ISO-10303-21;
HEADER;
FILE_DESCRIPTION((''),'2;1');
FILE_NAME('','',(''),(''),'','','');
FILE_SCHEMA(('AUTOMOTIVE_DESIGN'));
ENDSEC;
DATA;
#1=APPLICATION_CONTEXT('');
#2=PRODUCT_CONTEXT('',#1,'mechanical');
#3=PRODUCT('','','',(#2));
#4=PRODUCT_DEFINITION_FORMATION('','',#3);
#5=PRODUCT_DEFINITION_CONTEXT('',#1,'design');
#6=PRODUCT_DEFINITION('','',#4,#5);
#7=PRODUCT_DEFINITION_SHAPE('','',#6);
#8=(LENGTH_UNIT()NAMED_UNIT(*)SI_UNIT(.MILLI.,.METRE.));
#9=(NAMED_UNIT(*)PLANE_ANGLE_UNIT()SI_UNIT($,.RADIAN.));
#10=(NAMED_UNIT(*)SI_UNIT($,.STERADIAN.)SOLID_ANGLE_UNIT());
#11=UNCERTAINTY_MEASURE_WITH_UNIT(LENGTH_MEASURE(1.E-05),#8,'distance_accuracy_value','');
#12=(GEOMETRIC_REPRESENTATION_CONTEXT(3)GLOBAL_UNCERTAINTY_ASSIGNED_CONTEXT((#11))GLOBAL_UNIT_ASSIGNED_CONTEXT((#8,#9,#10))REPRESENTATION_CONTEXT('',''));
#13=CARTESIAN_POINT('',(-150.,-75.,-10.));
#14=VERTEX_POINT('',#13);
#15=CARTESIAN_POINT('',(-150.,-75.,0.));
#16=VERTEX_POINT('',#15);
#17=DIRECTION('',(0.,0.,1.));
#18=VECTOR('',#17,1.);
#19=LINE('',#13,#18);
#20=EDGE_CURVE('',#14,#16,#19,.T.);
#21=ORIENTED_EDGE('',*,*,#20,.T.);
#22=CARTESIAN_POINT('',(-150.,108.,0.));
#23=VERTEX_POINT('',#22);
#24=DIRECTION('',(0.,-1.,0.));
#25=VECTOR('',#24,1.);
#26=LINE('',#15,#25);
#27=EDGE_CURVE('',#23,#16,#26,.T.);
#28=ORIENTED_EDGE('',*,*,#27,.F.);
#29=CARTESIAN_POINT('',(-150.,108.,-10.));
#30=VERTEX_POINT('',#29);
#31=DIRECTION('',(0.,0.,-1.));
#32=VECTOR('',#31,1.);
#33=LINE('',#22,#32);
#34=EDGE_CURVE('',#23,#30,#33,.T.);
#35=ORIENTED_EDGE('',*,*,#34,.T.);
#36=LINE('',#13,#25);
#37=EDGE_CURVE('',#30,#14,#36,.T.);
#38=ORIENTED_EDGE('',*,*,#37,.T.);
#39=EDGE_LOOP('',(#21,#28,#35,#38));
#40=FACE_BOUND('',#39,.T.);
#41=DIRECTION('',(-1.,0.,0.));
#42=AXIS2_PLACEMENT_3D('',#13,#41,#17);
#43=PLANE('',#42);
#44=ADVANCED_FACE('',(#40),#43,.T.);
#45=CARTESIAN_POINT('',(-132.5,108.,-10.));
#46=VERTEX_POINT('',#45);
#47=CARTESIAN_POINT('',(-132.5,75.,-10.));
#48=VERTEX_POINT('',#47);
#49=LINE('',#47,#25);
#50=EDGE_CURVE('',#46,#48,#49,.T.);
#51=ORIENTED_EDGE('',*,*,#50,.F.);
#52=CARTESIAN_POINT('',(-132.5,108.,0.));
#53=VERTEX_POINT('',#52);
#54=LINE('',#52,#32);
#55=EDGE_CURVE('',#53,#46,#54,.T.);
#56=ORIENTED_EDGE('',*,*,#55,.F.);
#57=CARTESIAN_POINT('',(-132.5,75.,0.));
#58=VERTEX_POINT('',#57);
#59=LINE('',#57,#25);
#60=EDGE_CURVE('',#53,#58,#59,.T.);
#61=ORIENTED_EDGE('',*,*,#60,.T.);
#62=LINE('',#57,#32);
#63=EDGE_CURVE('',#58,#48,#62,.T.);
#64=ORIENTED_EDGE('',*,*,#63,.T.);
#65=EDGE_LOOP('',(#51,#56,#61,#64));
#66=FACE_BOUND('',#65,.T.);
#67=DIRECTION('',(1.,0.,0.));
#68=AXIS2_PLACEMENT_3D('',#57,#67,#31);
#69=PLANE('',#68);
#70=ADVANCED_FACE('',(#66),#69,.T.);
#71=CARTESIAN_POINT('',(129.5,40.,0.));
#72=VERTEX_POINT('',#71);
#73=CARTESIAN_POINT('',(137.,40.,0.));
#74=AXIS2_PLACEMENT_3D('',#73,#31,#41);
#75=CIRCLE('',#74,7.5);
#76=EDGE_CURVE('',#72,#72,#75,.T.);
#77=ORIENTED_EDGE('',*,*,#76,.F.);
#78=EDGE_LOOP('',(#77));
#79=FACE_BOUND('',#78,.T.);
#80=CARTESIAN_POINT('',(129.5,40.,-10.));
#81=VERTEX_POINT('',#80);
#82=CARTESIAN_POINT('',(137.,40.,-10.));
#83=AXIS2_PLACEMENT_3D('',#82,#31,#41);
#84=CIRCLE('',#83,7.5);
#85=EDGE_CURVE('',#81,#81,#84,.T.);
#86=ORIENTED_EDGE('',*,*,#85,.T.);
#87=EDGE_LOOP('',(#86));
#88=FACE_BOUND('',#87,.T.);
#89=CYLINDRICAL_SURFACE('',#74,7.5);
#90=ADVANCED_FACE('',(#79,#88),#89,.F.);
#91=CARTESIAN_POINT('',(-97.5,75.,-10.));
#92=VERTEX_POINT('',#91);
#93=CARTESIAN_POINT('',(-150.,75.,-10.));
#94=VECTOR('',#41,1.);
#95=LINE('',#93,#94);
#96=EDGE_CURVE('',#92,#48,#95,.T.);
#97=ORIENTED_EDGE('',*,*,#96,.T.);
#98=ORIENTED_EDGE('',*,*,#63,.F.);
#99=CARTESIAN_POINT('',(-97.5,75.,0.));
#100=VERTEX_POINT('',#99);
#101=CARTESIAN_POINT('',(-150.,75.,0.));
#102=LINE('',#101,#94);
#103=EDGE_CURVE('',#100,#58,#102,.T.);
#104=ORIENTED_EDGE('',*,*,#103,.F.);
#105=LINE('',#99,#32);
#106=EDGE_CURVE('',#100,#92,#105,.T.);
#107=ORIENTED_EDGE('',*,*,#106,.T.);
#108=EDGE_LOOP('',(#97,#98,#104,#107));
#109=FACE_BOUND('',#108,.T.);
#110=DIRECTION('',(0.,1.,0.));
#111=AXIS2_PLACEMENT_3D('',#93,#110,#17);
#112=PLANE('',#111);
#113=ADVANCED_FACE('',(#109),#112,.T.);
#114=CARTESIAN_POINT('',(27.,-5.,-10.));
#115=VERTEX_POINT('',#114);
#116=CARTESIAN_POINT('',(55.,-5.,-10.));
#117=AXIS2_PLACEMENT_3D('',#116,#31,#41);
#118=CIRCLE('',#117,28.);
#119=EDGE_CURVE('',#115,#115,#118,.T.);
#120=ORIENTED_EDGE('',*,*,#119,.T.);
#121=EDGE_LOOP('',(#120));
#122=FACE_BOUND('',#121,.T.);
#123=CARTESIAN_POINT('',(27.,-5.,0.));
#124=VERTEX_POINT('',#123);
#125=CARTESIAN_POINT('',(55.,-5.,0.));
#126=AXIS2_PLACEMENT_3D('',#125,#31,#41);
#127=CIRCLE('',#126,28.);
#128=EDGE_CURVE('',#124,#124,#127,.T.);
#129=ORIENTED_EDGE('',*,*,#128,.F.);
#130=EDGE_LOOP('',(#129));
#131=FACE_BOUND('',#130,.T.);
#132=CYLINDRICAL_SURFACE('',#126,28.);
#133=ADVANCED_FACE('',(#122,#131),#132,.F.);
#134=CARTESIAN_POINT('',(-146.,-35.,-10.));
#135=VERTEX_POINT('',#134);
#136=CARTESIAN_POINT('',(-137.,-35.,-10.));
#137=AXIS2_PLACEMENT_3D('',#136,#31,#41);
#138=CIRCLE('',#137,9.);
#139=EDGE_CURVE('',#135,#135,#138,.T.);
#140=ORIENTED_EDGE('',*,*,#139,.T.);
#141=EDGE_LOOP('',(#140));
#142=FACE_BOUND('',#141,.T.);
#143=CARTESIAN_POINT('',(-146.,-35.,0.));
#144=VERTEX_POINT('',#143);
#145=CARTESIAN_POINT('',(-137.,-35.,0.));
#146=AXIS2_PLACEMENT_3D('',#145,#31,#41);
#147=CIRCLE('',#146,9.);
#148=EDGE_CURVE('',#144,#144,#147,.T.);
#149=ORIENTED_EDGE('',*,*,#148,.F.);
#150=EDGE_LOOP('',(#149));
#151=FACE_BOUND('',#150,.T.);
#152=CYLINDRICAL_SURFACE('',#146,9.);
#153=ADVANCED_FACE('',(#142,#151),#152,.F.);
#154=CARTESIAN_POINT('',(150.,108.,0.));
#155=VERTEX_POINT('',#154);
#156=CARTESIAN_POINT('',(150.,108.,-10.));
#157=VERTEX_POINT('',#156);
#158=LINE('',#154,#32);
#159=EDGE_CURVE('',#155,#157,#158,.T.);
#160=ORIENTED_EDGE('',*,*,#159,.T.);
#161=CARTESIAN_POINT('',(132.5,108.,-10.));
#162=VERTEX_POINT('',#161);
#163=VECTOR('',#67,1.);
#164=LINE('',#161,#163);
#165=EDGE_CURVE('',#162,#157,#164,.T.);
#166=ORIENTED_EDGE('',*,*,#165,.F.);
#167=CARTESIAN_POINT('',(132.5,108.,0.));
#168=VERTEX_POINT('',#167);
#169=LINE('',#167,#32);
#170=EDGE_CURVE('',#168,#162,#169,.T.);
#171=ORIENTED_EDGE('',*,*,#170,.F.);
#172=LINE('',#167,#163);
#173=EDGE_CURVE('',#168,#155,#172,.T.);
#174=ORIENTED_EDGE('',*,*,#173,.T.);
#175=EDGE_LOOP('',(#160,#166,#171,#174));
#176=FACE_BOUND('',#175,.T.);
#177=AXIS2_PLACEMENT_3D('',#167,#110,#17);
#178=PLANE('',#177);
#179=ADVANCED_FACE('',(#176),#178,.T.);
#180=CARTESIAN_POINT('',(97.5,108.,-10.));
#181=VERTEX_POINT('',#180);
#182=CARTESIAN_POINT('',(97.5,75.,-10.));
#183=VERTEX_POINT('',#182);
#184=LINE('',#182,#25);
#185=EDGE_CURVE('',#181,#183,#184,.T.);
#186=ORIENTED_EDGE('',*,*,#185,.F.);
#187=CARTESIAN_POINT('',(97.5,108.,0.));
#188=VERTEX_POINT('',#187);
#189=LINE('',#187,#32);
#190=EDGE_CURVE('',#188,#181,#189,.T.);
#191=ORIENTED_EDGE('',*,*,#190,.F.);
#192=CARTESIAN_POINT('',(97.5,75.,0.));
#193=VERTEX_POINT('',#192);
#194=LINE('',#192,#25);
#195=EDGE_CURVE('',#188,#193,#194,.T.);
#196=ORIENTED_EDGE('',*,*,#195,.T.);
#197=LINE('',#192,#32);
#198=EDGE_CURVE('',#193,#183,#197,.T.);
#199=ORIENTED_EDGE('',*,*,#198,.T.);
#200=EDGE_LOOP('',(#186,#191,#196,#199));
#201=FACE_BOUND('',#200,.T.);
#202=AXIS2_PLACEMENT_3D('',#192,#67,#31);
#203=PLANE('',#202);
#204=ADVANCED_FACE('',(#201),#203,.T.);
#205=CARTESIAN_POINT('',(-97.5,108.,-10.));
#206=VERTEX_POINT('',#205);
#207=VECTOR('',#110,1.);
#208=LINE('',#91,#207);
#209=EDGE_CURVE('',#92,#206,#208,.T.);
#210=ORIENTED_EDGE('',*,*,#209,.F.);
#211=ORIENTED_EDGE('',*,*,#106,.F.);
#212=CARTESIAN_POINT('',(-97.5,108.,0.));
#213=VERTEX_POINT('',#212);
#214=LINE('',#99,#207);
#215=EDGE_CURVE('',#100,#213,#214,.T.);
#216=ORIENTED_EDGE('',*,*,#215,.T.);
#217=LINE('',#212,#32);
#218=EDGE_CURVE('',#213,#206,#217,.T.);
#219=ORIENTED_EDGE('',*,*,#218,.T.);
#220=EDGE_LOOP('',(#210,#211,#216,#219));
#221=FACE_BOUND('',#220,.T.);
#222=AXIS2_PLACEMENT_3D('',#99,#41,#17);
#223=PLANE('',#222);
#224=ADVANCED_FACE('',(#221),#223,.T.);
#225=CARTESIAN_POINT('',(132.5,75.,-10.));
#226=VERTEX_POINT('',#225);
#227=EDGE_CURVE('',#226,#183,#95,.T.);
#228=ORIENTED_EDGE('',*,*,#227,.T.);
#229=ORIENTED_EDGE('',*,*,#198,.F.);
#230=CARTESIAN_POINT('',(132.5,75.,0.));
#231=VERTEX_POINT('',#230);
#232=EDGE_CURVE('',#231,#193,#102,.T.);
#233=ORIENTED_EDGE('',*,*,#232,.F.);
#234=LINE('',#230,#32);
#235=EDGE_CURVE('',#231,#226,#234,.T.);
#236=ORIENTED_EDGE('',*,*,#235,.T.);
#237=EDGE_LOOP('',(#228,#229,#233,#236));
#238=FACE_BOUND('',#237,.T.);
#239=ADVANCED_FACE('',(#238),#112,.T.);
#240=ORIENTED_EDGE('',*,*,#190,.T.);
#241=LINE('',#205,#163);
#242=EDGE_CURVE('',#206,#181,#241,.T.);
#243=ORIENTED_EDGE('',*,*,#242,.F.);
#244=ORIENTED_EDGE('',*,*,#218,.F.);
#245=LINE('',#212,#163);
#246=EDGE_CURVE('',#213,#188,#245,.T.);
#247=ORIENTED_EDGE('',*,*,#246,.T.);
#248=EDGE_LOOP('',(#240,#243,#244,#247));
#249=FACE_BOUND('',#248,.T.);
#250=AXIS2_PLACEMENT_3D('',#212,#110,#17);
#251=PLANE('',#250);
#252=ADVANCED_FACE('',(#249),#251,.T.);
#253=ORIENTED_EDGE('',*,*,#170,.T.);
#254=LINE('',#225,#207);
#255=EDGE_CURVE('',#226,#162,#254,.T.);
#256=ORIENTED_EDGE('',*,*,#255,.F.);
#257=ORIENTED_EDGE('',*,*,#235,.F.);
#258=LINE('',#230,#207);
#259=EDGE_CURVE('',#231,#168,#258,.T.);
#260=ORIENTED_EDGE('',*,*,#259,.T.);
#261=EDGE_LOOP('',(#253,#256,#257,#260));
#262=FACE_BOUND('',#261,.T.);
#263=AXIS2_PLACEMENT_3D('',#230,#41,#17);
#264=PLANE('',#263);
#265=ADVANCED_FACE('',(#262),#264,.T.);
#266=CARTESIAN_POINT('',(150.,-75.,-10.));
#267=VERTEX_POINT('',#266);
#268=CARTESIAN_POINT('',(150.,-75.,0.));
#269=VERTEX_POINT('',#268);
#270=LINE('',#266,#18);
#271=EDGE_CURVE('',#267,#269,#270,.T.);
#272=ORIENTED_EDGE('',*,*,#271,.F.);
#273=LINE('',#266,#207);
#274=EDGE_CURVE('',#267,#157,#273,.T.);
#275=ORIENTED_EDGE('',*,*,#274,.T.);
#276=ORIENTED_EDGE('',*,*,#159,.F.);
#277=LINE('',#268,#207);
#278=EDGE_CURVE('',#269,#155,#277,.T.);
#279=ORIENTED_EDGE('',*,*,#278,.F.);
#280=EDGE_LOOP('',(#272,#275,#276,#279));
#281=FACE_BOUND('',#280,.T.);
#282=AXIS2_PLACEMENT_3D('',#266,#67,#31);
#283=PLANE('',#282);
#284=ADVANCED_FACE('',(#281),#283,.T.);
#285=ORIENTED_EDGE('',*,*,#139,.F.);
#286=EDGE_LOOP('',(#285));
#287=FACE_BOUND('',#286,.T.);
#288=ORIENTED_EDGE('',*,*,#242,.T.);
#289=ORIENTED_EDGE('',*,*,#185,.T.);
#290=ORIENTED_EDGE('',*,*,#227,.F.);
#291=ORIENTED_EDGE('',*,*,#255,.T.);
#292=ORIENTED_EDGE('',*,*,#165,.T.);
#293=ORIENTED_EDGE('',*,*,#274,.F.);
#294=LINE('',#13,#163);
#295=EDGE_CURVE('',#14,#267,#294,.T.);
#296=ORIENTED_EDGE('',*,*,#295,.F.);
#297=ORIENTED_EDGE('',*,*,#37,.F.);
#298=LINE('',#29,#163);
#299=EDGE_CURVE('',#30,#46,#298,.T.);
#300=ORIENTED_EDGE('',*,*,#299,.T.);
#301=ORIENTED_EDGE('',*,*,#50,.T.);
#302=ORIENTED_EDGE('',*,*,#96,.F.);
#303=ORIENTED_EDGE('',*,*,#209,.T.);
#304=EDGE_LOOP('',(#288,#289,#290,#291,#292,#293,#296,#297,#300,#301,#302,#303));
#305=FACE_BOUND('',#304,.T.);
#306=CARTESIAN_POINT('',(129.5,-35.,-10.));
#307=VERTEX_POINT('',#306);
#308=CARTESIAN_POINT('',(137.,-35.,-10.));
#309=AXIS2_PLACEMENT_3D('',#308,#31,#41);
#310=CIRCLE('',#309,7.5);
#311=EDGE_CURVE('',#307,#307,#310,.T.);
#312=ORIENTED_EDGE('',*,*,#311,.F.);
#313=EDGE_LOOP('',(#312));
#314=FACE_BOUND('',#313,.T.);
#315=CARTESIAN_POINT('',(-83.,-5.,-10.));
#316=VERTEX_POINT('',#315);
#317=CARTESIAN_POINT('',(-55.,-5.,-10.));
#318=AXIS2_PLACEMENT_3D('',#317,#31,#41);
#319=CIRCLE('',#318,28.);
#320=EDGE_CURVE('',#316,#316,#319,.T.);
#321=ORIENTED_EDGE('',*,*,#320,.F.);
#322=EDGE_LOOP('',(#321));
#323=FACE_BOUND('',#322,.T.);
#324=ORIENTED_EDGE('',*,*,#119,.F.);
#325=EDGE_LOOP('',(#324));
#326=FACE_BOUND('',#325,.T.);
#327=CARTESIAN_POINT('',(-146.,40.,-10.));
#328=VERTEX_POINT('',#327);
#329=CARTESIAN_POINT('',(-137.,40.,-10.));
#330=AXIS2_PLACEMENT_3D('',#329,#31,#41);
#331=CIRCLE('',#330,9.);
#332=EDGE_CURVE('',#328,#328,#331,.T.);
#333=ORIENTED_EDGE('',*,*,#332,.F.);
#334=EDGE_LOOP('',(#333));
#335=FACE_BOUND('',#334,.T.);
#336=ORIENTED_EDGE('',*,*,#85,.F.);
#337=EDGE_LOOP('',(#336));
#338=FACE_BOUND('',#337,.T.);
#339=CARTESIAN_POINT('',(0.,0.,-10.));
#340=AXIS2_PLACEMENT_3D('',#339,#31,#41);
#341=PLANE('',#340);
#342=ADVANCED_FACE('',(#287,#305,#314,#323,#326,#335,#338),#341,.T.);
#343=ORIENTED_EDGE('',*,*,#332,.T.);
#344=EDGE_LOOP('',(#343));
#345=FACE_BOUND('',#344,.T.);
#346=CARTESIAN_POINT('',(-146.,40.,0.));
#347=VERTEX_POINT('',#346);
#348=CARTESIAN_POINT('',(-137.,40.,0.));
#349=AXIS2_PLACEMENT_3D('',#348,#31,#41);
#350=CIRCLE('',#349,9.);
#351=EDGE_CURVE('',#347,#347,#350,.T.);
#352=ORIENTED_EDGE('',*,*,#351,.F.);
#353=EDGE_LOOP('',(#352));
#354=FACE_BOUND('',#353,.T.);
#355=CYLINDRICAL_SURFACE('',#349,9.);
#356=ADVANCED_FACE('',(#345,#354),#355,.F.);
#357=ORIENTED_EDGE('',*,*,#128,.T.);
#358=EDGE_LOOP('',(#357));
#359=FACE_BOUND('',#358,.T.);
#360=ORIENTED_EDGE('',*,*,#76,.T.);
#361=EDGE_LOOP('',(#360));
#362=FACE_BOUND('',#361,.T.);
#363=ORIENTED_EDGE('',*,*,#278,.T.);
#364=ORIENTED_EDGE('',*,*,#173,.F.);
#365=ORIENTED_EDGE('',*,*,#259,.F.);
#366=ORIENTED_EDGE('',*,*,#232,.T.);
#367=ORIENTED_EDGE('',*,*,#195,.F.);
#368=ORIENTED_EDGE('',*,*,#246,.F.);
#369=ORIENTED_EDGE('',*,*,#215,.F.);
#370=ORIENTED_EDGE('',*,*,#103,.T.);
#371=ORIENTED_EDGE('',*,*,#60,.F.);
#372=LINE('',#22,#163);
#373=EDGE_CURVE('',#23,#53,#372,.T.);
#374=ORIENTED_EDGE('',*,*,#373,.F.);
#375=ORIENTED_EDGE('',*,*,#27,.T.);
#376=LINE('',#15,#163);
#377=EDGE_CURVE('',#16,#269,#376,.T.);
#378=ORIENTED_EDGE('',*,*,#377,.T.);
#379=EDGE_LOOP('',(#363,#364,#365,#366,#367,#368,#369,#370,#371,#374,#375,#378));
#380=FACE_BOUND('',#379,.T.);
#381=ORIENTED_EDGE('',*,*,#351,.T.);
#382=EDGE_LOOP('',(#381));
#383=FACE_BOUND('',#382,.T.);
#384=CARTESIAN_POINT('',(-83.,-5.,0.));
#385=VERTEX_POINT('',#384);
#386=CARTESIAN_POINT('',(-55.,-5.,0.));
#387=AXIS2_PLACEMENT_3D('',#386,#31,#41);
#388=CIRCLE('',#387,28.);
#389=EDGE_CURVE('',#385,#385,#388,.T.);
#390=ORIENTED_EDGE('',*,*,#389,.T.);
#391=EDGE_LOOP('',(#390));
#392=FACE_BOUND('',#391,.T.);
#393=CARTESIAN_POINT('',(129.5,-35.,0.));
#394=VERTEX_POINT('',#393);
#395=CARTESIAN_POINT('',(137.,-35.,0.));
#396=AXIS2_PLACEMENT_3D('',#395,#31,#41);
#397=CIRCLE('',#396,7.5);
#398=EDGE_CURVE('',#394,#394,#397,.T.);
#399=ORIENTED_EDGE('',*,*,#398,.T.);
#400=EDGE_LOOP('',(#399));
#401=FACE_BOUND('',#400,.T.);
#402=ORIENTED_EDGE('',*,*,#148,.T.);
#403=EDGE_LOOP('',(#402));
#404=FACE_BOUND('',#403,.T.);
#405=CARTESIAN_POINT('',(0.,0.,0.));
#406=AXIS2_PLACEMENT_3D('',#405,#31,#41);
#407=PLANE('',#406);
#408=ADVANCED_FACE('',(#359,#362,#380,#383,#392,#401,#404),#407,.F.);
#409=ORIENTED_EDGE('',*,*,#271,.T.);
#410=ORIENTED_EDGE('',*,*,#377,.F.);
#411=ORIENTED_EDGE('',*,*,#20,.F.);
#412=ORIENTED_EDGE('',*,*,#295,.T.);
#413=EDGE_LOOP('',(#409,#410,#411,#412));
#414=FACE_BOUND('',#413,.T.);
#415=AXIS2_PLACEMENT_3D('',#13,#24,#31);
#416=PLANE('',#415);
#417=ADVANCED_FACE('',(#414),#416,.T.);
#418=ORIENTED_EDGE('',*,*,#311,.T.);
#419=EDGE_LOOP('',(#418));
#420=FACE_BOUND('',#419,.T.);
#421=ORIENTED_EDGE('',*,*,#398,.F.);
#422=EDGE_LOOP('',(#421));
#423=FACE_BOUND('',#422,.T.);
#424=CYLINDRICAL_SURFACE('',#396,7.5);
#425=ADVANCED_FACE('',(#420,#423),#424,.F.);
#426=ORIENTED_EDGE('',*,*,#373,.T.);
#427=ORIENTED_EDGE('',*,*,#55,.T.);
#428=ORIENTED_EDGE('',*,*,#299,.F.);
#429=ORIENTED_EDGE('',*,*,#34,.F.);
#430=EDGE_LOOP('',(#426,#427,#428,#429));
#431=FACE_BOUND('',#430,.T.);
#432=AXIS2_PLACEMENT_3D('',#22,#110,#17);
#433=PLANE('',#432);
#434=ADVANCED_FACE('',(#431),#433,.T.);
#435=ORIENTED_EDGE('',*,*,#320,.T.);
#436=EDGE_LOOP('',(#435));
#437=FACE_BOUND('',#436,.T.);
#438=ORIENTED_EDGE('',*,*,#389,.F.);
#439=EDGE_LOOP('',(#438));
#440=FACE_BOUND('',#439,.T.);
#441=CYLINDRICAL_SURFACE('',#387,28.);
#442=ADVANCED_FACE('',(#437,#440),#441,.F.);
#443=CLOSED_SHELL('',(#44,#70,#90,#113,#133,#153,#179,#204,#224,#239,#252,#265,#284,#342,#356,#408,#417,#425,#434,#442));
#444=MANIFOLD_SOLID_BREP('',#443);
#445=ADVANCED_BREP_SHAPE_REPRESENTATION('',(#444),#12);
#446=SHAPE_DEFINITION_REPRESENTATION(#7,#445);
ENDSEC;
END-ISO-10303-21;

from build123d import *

# Parameters (mm, degrees)
IZIM1_W               = 300
IZIM1_H               = 150
TABAN_FLAN_1_DEPTH    = 10
IZIM2_R               = 28
KES_EKSTR_ZYON1_DEPTH = 10
IZIM3_R               = 7.5
KES_EKSTR_ZYON2_DEPTH = 10
IZIM4_R               = 7.5
KES_EKSTR_ZYON3_DEPTH = 10
IZIM5_R               = 9
KES_EKSTR_ZYON4_DEPTH = 169.002976164
IZIM8_W               = 17.5
IZIM8_H               = 33
IZIM8_W_2             = 195
SEKME1_DEPTH          = 10


# Sheet-metal steps are written as plain solids
with BuildPart() as part:
    # Çizim1 → Taban-Flanş1 (new body)
    with BuildSketch(Plane.XY):
        Rectangle(IZIM1_W, IZIM1_H)
    extrude(amount=-TABAN_FLAN_1_DEPTH)

    # Çizim2 → Kes-Ekstrüzyon1 (cut)
    with BuildSketch(Plane(origin=(0, 0, -10), x_dir=(-1, 0, 0), z_dir=(0, 0, -1))):
        with Locations((-55, -5)):
            Circle(IZIM2_R)
        with Locations((55, -5)):
            Circle(IZIM2_R)
    extrude(amount=-KES_EKSTR_ZYON1_DEPTH, mode=Mode.SUBTRACT)

    # Çizim3 → Kes-Ekstrüzyon2 (cut)
    with BuildSketch(Plane(origin=(0, 0, -10), x_dir=(-1, 0, 0), z_dir=(0, 0, -1))):
        with Locations((-137, -35)):
            Circle(IZIM3_R)
        with Locations((-137, 40)):
            Circle(IZIM3_R)
    extrude(amount=-KES_EKSTR_ZYON2_DEPTH, mode=Mode.SUBTRACT)

    # Çizim4 → Kes-Ekstrüzyon3 (cut)
    with BuildSketch(Plane(origin=(0, 0, -10), x_dir=(-1, 0, 0), z_dir=(0, 0, -1))):
        with Locations((137, -35)):
            Circle(IZIM4_R)
        with Locations((137, 40)):
            Circle(IZIM4_R)
    extrude(amount=-KES_EKSTR_ZYON3_DEPTH, mode=Mode.SUBTRACT)

    # Çizim5 → Kes-Ekstrüzyon4 (cut, through all)
    with BuildSketch(Plane(origin=(0, 0, -10), x_dir=(-1, 0, 0), z_dir=(0, 0, -1))):
        with Locations((137, -35)):
            Circle(IZIM5_R)
        with Locations((137, 40)):
            Circle(IZIM5_R)
    extrude(amount=-KES_EKSTR_ZYON4_DEPTH, mode=Mode.SUBTRACT)

    # Çizim8 → Sekme1 (add)
    with BuildSketch(Plane(origin=(0, 0, -10), x_dir=(-1, 0, 0), z_dir=(0, 0, -1))):
        with Locations((141.25, 91.5)):
            Rectangle(IZIM8_W, IZIM8_H)
        with Locations((0, 91.5)):
            Rectangle(IZIM8_W_2, IZIM8_H)
        with Locations((-141.25, 91.5)):
            Rectangle(IZIM8_W, IZIM8_H)
    extrude(amount=-SEKME1_DEPTH)


solid = part.part
